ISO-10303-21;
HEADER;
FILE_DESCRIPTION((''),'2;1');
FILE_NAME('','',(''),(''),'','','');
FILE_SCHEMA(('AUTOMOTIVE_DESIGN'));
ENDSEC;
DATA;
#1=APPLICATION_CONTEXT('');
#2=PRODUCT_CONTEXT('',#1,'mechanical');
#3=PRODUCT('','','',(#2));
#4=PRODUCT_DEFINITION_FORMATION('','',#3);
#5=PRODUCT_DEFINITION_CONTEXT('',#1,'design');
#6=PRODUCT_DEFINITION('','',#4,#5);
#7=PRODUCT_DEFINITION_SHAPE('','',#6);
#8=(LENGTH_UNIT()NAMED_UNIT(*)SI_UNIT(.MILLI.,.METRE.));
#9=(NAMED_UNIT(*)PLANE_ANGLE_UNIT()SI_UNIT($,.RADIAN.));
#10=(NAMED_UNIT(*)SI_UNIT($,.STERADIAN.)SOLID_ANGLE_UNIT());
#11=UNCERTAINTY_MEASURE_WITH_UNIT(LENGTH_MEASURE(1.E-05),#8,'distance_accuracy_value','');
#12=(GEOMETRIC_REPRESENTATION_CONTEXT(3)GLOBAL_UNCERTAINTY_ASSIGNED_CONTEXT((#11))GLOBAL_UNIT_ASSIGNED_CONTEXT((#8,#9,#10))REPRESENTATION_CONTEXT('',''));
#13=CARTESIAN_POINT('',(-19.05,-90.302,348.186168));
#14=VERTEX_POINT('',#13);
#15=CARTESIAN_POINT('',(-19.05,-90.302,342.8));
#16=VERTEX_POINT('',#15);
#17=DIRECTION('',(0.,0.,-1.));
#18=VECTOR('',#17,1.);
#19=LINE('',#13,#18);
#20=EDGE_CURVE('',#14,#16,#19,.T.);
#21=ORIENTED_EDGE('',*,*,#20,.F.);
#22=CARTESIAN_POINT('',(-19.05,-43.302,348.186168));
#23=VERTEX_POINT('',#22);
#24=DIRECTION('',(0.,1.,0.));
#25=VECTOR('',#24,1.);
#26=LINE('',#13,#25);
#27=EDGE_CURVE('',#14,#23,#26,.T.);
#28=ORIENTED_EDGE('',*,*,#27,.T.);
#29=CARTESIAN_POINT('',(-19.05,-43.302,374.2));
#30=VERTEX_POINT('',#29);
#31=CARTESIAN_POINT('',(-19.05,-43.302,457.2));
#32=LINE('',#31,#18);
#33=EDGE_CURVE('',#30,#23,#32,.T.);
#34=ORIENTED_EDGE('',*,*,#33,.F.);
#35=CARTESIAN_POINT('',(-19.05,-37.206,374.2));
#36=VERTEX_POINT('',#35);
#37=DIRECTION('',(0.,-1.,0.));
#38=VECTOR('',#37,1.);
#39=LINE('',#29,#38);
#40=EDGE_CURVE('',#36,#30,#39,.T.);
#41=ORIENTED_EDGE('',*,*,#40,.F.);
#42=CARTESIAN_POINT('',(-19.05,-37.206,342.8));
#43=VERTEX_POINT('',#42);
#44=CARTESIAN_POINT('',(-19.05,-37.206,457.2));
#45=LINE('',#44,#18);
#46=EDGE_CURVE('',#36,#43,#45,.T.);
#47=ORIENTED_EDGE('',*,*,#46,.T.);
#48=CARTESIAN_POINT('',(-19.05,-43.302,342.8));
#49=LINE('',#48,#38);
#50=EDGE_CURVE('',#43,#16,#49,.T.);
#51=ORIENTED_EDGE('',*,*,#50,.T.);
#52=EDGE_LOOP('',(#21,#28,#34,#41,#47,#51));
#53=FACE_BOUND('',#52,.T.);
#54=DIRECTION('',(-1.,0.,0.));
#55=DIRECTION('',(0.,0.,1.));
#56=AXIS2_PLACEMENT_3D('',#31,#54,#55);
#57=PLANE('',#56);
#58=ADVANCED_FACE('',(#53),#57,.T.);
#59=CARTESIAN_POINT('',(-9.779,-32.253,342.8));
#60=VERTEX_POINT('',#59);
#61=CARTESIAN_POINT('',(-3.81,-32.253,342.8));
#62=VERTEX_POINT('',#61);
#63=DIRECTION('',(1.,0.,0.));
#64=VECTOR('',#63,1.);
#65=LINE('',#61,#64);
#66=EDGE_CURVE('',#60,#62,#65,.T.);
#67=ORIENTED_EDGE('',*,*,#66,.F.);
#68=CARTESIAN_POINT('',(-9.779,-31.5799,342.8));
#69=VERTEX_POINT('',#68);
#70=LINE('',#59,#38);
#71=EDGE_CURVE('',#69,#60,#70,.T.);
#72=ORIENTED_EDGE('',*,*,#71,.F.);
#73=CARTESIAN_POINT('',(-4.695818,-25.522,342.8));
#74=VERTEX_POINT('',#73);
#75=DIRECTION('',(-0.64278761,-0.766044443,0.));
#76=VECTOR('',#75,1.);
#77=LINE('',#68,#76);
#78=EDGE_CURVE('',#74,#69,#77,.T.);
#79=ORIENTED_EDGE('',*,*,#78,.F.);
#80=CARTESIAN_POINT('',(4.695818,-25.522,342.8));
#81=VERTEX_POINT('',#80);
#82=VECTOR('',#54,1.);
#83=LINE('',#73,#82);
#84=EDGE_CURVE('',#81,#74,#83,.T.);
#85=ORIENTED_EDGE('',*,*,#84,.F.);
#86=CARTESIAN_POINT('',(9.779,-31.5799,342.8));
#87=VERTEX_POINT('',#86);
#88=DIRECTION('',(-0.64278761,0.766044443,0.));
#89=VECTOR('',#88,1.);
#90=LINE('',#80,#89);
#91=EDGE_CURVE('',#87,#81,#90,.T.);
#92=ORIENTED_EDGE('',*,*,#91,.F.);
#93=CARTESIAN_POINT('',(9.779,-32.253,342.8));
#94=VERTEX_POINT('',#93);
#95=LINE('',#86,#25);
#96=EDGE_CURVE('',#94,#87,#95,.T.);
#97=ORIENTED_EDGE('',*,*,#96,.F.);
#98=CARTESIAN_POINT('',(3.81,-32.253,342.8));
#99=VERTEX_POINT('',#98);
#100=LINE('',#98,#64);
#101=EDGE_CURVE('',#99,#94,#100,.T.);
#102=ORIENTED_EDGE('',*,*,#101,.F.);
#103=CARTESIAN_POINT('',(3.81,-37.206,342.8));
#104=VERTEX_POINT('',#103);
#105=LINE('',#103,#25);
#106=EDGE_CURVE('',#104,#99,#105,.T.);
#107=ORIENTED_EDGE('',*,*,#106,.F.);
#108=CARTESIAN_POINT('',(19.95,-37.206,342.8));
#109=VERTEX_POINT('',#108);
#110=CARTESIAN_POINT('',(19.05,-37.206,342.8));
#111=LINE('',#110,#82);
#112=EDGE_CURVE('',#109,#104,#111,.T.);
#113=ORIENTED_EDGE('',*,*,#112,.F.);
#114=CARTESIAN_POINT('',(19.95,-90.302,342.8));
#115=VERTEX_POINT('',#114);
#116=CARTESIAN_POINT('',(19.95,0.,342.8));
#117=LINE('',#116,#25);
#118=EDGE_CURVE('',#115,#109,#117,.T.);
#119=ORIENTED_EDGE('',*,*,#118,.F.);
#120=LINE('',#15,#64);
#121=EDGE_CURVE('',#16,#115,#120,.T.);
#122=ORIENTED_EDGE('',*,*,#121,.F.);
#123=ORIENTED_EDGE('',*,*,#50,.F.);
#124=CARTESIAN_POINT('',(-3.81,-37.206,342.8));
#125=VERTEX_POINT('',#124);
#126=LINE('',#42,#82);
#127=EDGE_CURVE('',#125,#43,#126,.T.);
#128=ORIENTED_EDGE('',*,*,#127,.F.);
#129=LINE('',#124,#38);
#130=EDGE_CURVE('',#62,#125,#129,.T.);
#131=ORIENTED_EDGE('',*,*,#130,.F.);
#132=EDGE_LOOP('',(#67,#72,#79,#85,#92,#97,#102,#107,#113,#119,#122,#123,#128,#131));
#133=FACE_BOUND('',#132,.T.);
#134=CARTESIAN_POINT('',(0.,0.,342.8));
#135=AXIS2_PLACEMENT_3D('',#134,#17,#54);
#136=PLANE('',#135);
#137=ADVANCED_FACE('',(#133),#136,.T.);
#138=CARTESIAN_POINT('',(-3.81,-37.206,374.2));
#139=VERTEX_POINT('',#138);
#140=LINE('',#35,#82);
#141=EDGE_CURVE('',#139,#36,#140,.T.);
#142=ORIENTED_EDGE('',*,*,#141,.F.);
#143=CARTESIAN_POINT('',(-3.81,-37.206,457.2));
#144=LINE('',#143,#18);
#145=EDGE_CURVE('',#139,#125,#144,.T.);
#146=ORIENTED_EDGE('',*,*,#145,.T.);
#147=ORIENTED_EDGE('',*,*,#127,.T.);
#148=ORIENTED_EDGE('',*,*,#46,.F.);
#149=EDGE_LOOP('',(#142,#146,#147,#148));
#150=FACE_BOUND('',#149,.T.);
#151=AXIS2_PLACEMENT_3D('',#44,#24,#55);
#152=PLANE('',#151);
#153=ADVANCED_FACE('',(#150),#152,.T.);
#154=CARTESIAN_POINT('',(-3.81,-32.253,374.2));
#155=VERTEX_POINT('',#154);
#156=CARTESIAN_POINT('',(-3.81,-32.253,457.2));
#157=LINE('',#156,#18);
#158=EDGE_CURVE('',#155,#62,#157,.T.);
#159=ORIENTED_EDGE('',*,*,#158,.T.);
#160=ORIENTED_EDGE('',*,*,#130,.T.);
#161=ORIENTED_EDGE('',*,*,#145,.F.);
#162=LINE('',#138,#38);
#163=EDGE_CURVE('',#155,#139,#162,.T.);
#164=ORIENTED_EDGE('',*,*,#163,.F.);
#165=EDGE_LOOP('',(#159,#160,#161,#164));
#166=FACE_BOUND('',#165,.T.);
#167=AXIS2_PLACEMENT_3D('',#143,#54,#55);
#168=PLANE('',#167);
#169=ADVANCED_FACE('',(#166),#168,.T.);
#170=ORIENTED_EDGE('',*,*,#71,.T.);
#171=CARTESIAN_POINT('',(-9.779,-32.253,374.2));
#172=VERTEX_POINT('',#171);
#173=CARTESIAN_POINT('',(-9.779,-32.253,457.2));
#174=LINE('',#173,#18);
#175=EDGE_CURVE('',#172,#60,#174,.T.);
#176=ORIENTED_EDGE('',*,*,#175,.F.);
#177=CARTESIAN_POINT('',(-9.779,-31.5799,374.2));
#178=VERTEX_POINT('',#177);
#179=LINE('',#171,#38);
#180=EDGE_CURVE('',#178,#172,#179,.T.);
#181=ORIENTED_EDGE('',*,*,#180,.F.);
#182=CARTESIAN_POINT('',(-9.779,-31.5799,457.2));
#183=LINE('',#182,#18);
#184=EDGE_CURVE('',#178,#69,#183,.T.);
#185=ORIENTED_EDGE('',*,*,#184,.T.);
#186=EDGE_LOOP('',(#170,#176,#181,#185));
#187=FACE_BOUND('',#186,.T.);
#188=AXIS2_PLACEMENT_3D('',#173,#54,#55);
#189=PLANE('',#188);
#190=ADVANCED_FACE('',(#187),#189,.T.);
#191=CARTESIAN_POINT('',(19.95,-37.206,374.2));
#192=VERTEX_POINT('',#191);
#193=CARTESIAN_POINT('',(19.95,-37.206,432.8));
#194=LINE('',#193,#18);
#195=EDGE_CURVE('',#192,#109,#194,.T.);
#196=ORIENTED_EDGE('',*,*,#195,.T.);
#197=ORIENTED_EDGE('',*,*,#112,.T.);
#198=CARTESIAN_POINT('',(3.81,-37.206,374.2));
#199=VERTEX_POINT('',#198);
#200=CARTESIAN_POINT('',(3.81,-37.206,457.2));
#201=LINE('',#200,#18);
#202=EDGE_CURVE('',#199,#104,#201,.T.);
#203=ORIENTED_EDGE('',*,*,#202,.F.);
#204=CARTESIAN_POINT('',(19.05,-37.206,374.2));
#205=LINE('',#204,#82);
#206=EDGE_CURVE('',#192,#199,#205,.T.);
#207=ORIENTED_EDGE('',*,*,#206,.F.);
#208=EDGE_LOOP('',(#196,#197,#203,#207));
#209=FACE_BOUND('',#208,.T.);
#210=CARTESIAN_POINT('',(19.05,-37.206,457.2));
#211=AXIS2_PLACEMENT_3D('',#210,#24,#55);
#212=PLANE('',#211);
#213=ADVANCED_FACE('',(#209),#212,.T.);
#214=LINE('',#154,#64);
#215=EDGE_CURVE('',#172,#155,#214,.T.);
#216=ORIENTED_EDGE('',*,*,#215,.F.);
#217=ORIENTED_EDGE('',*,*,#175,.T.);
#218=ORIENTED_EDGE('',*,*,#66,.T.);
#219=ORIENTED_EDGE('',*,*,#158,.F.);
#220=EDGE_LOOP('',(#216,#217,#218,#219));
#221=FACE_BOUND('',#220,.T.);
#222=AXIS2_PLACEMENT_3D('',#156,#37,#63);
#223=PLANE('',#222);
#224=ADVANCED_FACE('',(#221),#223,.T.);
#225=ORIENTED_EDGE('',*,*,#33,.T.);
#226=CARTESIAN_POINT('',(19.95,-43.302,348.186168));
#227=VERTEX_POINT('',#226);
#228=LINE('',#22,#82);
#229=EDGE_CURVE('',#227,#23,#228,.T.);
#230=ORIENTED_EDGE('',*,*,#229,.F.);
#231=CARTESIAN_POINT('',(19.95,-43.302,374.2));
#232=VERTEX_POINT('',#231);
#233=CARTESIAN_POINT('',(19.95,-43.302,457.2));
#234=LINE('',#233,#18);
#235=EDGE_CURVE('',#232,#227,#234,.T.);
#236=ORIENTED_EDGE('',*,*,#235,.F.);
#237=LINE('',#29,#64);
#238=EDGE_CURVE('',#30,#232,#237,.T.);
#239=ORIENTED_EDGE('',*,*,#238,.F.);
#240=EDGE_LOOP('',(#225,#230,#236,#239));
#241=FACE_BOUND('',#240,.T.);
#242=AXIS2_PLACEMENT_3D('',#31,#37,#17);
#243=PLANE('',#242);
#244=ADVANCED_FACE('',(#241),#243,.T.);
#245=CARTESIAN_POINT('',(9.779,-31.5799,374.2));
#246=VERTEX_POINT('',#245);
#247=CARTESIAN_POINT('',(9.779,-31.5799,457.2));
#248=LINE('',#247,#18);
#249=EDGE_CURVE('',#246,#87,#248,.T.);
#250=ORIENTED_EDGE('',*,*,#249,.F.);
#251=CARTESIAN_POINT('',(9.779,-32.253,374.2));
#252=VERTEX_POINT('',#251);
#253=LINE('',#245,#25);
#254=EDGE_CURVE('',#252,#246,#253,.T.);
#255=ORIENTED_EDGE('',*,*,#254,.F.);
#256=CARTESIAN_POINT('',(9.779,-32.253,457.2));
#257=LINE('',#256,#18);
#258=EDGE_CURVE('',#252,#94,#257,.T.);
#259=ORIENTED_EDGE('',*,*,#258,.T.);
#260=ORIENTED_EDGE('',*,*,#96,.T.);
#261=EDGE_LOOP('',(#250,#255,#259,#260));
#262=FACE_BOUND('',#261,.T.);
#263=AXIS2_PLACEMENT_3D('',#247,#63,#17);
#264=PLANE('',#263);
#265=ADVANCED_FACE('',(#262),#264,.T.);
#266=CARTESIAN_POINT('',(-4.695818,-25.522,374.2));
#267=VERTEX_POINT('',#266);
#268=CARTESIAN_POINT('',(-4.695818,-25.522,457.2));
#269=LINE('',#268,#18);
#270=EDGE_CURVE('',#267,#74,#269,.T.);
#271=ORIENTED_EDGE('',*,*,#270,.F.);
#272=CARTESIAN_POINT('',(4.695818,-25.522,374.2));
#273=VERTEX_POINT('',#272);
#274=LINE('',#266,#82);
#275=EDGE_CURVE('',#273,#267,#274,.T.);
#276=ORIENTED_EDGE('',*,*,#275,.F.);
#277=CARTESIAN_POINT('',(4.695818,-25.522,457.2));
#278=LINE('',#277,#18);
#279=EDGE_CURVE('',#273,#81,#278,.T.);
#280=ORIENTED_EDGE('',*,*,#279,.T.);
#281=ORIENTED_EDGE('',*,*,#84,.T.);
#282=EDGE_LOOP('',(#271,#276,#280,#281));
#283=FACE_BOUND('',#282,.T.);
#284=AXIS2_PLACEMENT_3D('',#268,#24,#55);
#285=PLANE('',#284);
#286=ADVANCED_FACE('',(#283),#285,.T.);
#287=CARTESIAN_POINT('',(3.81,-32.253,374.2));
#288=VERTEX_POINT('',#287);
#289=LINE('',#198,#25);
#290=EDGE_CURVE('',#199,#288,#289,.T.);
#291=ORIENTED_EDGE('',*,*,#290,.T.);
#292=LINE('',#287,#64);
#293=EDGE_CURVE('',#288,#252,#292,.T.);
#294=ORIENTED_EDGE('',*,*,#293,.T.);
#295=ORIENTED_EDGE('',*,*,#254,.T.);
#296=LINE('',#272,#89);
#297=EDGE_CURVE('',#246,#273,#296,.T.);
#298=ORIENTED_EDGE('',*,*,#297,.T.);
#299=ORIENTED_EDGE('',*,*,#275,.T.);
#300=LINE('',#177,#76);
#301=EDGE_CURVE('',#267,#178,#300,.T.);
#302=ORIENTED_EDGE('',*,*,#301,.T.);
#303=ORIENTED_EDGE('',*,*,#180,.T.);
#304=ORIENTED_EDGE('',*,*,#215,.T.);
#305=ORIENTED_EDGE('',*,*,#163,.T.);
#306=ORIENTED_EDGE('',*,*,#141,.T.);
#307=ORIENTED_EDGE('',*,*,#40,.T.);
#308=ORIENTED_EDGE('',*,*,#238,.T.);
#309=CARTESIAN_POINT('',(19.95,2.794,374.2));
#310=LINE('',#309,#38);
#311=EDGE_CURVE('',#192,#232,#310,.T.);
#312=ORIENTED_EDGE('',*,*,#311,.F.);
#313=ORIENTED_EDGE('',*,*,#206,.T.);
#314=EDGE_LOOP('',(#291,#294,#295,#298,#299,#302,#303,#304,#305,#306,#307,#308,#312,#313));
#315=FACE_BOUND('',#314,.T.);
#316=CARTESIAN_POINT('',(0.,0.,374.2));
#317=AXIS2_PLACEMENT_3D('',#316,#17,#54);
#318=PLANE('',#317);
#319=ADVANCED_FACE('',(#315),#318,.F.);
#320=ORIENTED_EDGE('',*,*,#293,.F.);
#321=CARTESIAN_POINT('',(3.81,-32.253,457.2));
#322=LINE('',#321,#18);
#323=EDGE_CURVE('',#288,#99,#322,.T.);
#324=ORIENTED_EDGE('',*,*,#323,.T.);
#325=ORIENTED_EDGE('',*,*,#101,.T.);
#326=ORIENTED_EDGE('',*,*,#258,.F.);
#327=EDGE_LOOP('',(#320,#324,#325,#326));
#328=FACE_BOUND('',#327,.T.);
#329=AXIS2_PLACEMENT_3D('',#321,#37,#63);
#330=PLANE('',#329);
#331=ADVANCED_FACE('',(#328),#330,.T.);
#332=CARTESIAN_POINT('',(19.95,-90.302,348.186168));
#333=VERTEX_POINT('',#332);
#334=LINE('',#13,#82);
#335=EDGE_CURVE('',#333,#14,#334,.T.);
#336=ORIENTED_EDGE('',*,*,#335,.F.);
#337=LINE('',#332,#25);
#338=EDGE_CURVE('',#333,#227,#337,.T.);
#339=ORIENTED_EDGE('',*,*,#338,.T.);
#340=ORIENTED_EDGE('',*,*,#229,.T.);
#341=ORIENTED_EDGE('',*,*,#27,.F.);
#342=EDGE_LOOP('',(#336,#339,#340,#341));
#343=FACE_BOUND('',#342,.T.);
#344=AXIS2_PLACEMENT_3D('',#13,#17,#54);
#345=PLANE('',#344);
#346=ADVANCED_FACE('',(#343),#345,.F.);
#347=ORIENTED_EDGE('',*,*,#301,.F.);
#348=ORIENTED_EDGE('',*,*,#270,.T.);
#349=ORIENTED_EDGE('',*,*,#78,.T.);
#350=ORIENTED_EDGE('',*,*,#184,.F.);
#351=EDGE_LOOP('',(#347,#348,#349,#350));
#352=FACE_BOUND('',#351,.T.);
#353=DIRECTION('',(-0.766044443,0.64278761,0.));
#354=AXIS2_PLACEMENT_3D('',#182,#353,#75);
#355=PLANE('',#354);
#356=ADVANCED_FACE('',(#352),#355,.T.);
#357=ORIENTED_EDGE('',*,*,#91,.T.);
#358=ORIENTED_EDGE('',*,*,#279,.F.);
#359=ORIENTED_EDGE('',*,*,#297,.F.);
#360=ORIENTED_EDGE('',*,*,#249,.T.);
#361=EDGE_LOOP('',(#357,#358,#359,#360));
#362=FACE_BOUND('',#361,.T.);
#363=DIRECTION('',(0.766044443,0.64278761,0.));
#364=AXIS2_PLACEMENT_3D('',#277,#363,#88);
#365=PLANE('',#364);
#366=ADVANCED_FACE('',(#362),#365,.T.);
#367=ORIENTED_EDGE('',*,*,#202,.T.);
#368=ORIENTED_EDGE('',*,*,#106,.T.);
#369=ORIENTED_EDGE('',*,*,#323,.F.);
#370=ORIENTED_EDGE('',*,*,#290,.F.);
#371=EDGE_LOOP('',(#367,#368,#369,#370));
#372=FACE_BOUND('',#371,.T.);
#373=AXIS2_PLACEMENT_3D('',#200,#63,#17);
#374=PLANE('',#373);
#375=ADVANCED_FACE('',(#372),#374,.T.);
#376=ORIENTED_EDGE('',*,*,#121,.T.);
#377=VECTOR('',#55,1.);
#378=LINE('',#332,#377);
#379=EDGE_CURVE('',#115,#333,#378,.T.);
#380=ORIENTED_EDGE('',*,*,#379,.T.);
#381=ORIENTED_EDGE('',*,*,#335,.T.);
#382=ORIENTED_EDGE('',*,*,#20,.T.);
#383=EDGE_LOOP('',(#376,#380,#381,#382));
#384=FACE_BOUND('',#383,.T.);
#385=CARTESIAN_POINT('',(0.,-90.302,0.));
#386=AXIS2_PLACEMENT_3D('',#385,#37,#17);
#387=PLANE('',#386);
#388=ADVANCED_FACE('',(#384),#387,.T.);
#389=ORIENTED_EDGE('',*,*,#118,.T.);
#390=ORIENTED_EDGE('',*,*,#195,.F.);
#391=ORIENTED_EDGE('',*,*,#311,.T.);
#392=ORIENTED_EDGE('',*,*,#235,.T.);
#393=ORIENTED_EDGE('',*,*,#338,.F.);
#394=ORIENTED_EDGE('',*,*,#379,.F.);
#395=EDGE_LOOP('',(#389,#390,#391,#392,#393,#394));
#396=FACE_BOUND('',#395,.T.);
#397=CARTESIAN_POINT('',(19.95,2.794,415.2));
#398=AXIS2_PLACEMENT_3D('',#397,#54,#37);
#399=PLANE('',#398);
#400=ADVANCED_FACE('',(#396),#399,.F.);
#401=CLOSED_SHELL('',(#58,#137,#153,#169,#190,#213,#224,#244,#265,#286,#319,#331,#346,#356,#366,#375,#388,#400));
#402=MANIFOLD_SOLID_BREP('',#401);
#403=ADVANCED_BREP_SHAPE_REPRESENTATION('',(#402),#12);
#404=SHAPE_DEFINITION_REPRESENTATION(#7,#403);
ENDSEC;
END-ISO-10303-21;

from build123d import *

# Parameters (mm, degrees)
BOSS_EXTRUDE1_DEPTH = 457.2
SKETCH2_W           = 42.050956734
SKETCH2_H           = 23.599286926
CUT_EXTRUDE1_DEPTH  = 800
SKETCH3_W           = 114.4
SKETCH3_H           = 56.436670765
BOSS_EXTRUDE2_DEPTH = 10
SKETCH4_W           = 114.4
SKETCH4_H           = 4.244670765
CUT_EXTRUDE2_DEPTH  = 10
SKETCH7_W           = 48.1
SKETCH7_H           = 52.192
CUT_EXTRUDE3_DEPTH  = 42
SKETCH8_W           = 0.9
SKETCH8_H           = 40
CUT_EXTRUDE4_DEPTH  = 90
SPLIT1_START        = 342.8
SPLIT1_DEPTH        = 72.4
SPLIT1_START_2      = 19.95
SPLIT1_2_OUTLINE_W  = 52.192
SPLIT1_2_OUTLINE_H  = 72.4
SPLIT1_2_DEPTH      = 9.1
SPLIT1_START_3      = -19.05
SPLIT1_3_OUTLINE_W  = 17.78
SPLIT1_3_OUTLINE_H  = 72.4
SPLIT1_3_DEPTH      = 48.1
SPLIT1_4_OUTLINE_W  = 34.412
SPLIT1_4_OUTLINE_H  = 72.4
SPLIT1_4_DEPTH      = 9.1
SKETCH9_W           = 43.051140559
SKETCH9_H           = 19.836335545
CUT_EXTRUDE5_DEPTH  = 41
SKETCH10_W          = 39
SKETCH10_H          = 5.38616804
BOSS_EXTRUDE3_DEPTH = 47


# Read off the part's stored shape, not the designer's step: Split1
with BuildPart() as part:
    # Sketch1 → Boss-Extrude1 (new, symmetric)
    with BuildSketch(Plane.XY):
        Polygon((-19.05, 8.89), (19.05, 8.89), (19.05, 2.794), (3.81, 2.794), (3.81, -2.159), (9.779, -2.159), (9.779, -2.8321), (4.695818344, -8.89), (-4.695818344, -8.89), (-9.779, -2.8321), (-9.779, -2.159), (-3.81, -2.159), (-3.81, 2.794), (-19.05, 2.794), align=None)
    boss_extrude1 = extrude(amount=BOSS_EXTRUDE1_DEPTH, both=True)

    # Sketch2 → Cut-Extrude1 (cut)
    with BuildSketch(Plane(origin=(0, 0, -457.2), x_dir=(-1, 0, 0), z_dir=(0, 0, -1))):
        Rectangle(SKETCH2_W, SKETCH2_H)
    cut_extrude1 = extrude(amount=-CUT_EXTRUDE1_DEPTH, mode=Mode.SUBTRACT)

    # Sketch3 → Boss-Extrude2 (add)
    with BuildSketch(Plane(origin=(19.05, 0, 0), x_dir=(0, 0, -1), z_dir=(1, 0, 0))):
        with Locations((-400, -19.328335383)):
            Rectangle(SKETCH3_W, SKETCH3_H)
    extrude(amount=BOSS_EXTRUDE2_DEPTH)

    # Mirror1: Boss-Extrude1, Cut-Extrude1 across plane
    add(boss_extrude1.mirror(Plane(origin=(0, -17.206, 0), x_dir=(0, 0, 1), z_dir=(0, -1, 0))))
    add(cut_extrude1.mirror(Plane(origin=(0, -17.206, 0), x_dir=(0, 0, 1), z_dir=(0, -1, 0))), mode=Mode.SUBTRACT)

    # Sketch4 → Cut-Extrude2 (cut)
    with BuildSketch(Plane.ZY.offset(-19.05)):
        with Locations((400, -45.424335383)):
            Rectangle(SKETCH4_W, SKETCH4_H)
    extrude(amount=-CUT_EXTRUDE2_DEPTH, mode=Mode.SUBTRACT)

    # Sketch7 → Cut-Extrude3 (cut)
    with BuildSketch(Plane.XY.offset(457.2)):
        with Locations((5, -17.206)):
            Rectangle(SKETCH7_W, SKETCH7_H)
    extrude(amount=-CUT_EXTRUDE3_DEPTH, mode=Mode.SUBTRACT)

    # Sketch8 → Cut-Extrude4 (cut)
    with BuildSketch(Plane(origin=(0, 0, 342.8), x_dir=(-1, 0, 0), z_dir=(0, 0, -1))):
        with Locations((-19.5, -17.206)):
            Rectangle(SKETCH8_W, SKETCH8_H)
    extrude(amount=-CUT_EXTRUDE4_DEPTH, mode=Mode.SUBTRACT)

    # Split1 3 outline → Split1 3 (cut)
    with BuildSketch(Plane.YZ.offset(SPLIT1_START_3)):
        with Locations((0, 379)):
            Rectangle(SPLIT1_3_OUTLINE_W, SPLIT1_3_OUTLINE_H)
    extrude(amount=SPLIT1_3_DEPTH, mode=Mode.SUBTRACT)

    # Split1 4 outline → Split1 4 (cut)
    with BuildSketch(Plane.YZ.offset(SPLIT1_START_2)):
        with Locations((-26.096, 379)):
            Rectangle(SPLIT1_4_OUTLINE_W, SPLIT1_4_OUTLINE_H)
    extrude(amount=SPLIT1_4_DEPTH, mode=Mode.SUBTRACT)


with BuildPart() as body_2:
    # Split1 outline → Split1 (new body)
    with BuildSketch(Plane.XY.offset(SPLIT1_START)):
        Polygon((19.95, 2.794), (19.95, 8.89), (-19.05, 8.89), (-19.05, 2.794), (-3.81, 2.794), (-3.81, -2.159), (-9.779, -2.159), (-9.779, -2.8321), (-4.695818344, -8.89), (4.695818344, -8.89), (9.779, -2.8321), (9.779, -2.159), (3.81, -2.159), (3.81, 2.794), align=None)
    extrude(amount=SPLIT1_DEPTH)


with BuildPart() as body_3:
    # Split1 2 outline → Split1 2 (new body)
    with BuildSketch(Plane.YZ.offset(SPLIT1_START_2)):
        with Locations((-17.206, 379)):
            Rectangle(SPLIT1_2_OUTLINE_W, SPLIT1_2_OUTLINE_H)
    extrude(amount=SPLIT1_2_DEPTH)


with BuildPart() as part_1:
    add(part.part)

    # Combine1: cut body 3, body 2
    add(body_3.part, mode=Mode.SUBTRACT)
    add(body_2.part, mode=Mode.SUBTRACT)

    # Sketch9 → Cut-Extrude5 (cut)
    with BuildSketch(Plane.XY.offset(415.2)):
        with Locations((2.47557028, -33.383832228)):
            Rectangle(SKETCH9_W, SKETCH9_H)
    extrude(amount=-CUT_EXTRUDE5_DEPTH, mode=Mode.SUBTRACT)

    # Sketch10 → Boss-Extrude3 (add)
    with BuildSketch(Plane(origin=(0, -43.302, 0), x_dir=(-1, 0, 0), z_dir=(0, -1, 0))):
        with Locations((-0.45, -345.49308402)):
            Rectangle(SKETCH10_W, SKETCH10_H)
    extrude(amount=BOSS_EXTRUDE3_DEPTH)


solid = part_1.part
